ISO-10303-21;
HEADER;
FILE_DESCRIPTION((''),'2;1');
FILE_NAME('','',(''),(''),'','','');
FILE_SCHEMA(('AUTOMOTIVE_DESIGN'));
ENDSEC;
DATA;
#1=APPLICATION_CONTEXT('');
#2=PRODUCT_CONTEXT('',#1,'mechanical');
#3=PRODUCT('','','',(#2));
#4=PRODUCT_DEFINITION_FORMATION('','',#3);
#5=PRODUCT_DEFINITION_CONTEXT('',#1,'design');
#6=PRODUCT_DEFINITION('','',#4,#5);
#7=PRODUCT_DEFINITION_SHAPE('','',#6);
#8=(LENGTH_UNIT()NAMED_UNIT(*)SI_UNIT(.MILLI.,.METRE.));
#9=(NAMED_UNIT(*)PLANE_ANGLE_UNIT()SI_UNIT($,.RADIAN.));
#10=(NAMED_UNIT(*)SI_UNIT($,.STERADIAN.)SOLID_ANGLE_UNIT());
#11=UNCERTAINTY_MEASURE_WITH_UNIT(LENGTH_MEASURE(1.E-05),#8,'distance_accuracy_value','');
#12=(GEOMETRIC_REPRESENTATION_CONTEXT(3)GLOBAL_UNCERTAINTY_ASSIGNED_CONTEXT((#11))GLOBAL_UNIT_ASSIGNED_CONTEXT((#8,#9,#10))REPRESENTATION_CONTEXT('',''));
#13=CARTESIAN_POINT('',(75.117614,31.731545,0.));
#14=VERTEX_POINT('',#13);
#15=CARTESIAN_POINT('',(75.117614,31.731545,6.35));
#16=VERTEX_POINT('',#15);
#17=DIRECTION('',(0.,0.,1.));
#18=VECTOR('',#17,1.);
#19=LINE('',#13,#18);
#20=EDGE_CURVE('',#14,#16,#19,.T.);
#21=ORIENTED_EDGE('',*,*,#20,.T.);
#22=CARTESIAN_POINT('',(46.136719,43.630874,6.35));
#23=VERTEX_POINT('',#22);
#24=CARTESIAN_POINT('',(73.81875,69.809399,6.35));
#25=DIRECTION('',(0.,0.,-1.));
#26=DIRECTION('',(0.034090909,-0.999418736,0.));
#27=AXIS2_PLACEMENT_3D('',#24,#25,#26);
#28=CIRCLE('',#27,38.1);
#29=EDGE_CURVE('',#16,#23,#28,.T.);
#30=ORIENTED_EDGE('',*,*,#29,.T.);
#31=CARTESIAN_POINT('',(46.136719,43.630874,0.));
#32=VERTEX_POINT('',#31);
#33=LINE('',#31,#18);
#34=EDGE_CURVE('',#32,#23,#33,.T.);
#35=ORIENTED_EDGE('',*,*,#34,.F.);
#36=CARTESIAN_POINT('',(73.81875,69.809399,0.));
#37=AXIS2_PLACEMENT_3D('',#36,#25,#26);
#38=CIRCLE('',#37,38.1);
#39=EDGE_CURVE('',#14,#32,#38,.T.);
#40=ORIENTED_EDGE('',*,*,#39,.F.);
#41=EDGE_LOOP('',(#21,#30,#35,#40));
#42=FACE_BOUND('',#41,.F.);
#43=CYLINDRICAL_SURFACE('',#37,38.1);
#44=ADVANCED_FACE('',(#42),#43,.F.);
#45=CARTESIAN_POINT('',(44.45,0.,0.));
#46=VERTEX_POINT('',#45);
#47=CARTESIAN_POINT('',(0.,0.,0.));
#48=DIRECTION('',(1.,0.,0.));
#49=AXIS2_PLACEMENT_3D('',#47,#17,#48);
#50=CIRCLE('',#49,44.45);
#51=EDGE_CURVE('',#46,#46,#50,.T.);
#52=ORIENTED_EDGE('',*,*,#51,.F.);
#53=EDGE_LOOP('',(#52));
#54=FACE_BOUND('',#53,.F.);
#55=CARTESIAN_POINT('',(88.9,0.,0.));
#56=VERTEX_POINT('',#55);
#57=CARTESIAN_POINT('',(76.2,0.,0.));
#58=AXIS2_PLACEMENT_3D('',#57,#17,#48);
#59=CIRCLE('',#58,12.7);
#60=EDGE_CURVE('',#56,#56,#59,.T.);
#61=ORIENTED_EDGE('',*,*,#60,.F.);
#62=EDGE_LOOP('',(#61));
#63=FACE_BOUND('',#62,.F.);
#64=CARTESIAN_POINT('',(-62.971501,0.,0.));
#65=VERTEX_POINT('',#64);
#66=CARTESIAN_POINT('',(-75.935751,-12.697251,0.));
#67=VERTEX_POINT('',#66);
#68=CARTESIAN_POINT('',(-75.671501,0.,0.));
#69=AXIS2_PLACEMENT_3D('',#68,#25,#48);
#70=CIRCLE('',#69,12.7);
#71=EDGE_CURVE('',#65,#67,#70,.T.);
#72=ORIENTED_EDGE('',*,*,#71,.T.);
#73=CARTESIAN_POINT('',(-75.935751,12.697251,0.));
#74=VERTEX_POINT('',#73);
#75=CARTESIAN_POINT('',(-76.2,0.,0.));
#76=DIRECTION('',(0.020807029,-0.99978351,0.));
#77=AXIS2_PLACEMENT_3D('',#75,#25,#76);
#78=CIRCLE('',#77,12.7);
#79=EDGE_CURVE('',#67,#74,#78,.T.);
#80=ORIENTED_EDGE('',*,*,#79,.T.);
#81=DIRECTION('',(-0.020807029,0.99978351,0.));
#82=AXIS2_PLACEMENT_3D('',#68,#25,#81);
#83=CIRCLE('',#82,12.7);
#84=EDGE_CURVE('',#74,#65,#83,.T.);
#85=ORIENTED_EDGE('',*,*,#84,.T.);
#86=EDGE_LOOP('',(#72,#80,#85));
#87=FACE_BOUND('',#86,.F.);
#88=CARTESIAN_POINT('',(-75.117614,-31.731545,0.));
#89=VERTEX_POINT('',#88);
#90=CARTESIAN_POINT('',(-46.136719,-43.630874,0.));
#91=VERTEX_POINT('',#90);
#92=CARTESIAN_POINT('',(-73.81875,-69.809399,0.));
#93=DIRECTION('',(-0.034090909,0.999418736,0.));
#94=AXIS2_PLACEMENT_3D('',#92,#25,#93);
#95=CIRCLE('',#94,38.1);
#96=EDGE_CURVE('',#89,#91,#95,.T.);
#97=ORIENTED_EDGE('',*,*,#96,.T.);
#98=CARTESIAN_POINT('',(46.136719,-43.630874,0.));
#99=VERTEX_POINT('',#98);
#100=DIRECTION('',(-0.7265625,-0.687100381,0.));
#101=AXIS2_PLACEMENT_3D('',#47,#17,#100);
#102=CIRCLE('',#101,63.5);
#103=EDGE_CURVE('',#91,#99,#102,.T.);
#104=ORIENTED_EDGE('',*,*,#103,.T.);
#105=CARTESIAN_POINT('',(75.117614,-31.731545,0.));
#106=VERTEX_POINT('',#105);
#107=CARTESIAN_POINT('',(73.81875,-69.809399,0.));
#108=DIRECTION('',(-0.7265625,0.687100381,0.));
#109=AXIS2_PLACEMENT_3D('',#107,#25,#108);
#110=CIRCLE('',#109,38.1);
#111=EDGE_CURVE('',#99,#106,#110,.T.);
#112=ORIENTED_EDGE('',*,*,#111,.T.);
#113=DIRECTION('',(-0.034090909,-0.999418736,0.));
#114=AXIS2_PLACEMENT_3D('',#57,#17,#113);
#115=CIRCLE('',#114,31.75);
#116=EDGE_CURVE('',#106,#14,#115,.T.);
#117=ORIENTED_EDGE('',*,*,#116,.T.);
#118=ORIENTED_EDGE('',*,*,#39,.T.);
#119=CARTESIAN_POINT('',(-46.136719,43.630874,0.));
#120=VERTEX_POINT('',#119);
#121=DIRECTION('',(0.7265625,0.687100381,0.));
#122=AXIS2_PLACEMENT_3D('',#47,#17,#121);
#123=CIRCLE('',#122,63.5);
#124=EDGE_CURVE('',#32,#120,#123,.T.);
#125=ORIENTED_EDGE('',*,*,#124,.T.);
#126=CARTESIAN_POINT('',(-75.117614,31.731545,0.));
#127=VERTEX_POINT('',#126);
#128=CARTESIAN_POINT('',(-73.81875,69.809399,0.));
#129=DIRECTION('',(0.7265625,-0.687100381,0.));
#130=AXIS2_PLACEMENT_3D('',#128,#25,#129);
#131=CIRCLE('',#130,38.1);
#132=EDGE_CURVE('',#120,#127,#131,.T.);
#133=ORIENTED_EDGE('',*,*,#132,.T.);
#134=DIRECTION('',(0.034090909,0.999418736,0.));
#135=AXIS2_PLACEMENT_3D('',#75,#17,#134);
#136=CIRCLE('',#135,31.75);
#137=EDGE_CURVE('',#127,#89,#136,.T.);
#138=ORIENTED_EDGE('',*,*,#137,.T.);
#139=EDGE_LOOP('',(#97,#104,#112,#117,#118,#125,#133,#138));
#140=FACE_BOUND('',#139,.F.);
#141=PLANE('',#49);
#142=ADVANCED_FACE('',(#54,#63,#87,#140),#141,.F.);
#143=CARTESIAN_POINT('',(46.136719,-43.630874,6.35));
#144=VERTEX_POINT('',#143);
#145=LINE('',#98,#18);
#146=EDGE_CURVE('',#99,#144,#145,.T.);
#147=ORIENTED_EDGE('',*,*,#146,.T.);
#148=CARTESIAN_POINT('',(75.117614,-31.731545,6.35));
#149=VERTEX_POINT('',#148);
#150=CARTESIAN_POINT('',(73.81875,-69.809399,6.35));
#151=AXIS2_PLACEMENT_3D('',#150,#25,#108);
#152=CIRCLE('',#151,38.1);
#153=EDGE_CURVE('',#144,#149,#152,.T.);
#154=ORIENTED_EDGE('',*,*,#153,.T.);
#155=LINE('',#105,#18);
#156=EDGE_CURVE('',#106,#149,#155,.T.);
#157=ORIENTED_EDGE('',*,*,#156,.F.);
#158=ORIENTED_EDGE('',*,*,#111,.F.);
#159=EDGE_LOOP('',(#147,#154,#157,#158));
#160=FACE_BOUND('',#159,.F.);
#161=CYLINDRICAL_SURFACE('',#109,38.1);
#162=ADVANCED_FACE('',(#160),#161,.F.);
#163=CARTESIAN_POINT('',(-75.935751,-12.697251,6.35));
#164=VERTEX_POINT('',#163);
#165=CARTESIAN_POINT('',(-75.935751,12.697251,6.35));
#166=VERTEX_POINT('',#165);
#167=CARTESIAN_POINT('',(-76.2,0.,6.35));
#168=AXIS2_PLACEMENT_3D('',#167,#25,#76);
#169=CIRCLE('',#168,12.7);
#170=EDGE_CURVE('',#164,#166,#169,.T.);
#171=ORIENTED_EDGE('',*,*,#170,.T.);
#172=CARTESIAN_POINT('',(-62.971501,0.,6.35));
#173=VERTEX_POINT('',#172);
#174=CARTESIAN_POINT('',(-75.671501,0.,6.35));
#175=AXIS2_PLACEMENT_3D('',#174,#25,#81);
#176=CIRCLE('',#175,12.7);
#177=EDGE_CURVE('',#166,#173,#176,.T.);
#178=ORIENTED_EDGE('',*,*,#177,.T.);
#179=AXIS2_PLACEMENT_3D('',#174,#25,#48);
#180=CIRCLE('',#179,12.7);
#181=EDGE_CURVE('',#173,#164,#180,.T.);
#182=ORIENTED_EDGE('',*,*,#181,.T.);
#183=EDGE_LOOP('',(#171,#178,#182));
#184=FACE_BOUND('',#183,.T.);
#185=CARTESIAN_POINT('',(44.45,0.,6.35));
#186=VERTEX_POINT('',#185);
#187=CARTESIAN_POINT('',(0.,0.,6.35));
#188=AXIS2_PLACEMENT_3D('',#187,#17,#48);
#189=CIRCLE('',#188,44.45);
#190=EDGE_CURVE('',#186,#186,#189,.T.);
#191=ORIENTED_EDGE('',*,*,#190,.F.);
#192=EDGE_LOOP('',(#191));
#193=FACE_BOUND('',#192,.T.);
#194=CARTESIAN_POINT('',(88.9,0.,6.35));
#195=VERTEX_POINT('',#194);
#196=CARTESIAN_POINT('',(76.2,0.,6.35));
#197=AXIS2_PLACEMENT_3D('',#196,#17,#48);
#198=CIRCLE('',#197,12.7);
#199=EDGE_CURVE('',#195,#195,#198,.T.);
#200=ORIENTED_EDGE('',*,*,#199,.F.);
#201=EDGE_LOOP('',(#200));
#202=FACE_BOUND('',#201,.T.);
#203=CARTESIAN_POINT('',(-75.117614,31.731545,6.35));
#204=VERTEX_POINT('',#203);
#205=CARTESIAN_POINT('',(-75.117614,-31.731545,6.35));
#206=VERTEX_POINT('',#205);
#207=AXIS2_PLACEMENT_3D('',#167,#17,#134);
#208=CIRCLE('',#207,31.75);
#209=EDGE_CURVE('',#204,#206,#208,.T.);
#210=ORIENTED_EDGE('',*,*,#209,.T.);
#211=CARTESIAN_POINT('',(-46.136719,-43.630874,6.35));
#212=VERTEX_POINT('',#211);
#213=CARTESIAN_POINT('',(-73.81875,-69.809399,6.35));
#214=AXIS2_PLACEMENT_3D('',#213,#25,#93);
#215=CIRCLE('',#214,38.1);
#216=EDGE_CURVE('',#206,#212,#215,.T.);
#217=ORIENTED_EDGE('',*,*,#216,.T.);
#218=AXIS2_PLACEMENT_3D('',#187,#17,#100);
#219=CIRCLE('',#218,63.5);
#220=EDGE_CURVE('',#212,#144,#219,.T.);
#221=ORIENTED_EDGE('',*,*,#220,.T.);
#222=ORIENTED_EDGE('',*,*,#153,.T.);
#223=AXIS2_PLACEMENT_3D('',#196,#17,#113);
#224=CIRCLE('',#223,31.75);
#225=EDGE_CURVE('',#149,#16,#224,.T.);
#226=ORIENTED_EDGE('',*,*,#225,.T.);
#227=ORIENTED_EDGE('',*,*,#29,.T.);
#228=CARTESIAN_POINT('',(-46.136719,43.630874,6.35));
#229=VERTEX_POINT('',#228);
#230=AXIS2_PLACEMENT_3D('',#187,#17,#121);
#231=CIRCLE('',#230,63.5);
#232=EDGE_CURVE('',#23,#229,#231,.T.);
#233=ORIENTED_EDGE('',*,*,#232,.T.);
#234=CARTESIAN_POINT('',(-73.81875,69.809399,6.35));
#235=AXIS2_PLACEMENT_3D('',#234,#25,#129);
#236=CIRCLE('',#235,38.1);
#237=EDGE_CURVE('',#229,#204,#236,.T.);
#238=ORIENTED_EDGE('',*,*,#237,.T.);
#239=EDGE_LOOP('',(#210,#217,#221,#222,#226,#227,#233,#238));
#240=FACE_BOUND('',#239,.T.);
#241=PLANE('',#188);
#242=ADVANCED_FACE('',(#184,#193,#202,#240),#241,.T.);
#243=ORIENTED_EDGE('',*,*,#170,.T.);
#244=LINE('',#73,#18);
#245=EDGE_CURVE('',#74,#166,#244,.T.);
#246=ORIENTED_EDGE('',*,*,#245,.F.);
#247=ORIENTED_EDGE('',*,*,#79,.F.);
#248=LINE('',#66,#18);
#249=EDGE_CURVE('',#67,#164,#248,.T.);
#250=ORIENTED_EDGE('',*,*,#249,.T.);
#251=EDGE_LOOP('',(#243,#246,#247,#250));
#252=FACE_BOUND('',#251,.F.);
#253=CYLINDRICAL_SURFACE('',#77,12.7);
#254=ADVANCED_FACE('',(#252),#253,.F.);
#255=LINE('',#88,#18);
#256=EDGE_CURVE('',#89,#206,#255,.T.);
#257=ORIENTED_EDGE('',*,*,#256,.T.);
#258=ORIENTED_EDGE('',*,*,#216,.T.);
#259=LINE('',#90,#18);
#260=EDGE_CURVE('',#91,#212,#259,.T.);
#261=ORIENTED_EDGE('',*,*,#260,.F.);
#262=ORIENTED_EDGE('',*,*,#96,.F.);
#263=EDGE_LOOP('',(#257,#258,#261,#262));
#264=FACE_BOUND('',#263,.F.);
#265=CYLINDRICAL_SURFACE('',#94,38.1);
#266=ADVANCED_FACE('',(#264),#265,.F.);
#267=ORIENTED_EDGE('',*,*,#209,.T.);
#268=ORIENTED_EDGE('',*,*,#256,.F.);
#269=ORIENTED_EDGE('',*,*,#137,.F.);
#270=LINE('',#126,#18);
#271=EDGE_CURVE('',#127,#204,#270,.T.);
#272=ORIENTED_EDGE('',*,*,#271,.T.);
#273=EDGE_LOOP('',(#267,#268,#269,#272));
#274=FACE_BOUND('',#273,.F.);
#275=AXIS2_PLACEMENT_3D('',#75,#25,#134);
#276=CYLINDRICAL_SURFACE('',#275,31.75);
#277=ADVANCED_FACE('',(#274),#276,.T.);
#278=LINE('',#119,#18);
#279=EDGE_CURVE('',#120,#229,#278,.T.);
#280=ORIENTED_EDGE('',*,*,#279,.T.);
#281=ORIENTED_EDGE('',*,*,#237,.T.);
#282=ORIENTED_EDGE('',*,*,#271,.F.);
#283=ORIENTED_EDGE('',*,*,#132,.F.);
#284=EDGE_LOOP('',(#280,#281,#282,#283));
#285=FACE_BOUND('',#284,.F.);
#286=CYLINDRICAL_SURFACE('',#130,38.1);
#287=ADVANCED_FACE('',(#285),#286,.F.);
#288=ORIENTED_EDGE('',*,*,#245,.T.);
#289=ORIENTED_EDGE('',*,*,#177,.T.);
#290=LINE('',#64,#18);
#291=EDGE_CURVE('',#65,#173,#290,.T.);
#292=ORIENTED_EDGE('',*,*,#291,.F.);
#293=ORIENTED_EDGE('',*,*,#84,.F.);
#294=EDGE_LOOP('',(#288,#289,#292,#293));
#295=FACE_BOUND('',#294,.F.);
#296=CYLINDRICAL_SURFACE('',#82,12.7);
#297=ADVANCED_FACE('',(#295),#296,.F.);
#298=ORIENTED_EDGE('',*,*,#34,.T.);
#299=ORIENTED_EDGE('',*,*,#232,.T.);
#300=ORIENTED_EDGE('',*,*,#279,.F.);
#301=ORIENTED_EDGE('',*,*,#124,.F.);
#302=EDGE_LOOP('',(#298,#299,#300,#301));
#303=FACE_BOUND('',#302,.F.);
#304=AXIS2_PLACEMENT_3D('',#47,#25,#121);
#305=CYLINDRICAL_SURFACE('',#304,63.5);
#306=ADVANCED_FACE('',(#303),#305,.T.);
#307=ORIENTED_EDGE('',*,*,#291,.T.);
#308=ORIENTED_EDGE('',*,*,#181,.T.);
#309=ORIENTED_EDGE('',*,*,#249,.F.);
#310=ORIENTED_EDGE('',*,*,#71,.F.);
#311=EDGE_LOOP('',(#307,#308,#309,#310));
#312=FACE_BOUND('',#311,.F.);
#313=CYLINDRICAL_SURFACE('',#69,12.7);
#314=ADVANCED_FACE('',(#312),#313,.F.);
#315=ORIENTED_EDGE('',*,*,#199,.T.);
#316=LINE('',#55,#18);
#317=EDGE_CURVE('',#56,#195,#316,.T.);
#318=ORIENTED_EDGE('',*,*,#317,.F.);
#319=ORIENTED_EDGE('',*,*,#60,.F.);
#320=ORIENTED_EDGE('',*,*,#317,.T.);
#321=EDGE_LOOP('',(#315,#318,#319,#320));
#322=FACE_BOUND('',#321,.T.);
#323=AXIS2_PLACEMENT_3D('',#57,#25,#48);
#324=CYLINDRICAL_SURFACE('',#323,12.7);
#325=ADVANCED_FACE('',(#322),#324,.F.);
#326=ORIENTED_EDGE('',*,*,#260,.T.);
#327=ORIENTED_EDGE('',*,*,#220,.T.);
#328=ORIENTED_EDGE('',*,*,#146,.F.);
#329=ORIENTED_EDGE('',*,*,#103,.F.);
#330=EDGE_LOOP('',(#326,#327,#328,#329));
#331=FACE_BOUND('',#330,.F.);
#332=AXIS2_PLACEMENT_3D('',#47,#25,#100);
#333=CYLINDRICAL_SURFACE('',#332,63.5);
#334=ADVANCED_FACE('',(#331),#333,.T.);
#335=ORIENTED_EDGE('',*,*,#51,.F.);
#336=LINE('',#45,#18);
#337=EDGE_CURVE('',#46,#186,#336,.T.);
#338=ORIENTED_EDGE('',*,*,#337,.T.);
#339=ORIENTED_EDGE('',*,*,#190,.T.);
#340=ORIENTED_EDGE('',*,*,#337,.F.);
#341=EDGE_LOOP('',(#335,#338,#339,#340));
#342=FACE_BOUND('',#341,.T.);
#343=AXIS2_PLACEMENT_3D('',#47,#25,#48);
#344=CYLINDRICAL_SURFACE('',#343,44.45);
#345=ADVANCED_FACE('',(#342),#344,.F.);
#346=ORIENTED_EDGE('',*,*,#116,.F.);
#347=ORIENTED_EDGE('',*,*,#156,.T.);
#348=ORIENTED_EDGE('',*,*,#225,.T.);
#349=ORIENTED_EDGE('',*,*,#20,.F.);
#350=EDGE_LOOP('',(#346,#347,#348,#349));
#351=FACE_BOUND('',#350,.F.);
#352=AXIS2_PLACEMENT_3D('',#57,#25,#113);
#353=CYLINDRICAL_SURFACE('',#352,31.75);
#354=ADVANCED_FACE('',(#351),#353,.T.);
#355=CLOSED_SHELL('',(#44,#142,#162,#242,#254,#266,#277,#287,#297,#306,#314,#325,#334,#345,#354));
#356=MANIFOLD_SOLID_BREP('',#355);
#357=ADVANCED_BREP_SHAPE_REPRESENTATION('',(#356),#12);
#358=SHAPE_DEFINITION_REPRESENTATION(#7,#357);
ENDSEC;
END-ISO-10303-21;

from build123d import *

# Parameters (mm, degrees)
F0_R     = 44.45
F0_R_2   = 12.7
F2_DEPTH = 6.35


# Not quite as in the source:
# - a feature of the source that left no trace in its solid (it failed there, or was rolled back) is left out


with BuildPart() as f2:
    # F0 (on Top) → F2 (new body)
    with BuildSketch(Plane.XY):
        with BuildLine():
            ThreePointArc((46.13671875, -43.6308741946), (59.3475236203, -34.5646316236), (75.1176136364, -31.7315448688))
            ThreePointArc((75.1176136364, -31.7315448688), (107.95, 0), (75.1176136364, 31.7315448688))
            ThreePointArc((75.1176136364, 31.7315448688), (59.3475236203, 34.5646316236), (46.13671875, 43.6308741946))
            ThreePointArc((46.13671875, 43.6308741946), (0, 63.5), (-46.13671875, 43.6308741946))
            ThreePointArc((-46.13671875, 43.6308741946), (-59.3475236203, 34.5646316236), (-75.1176136364, 31.7315448688))
            ThreePointArc((-75.1176136364, 31.7315448688), (-107.95, 0), (-75.1176136364, -31.7315448688))
            ThreePointArc((-75.1176136364, -31.7315448688), (-59.3475236203, -34.5646316236), (-46.13671875, -43.6308741946))
            ThreePointArc((-46.13671875, -43.6308741946), (0, -63.5), (46.13671875, -43.6308741946))
        make_face()
        with BuildLine():
            ThreePointArc((-75.9357507288, 12.6972505812), (-66.7851626656, 9.0732013574), (-62.9715014577, 0))
            ThreePointArc((-62.9715014577, 0), (-66.7851626656, -9.0732013574), (-75.9357507288, -12.6972505812))
            ThreePointArc((-75.9357507288, -12.6972505812), (-88.9, 0), (-75.9357507288, 12.6972505812))
        make_face(mode=Mode.SUBTRACT)
        Circle(F0_R, mode=Mode.SUBTRACT)
        with Locations((76.2, 0)):
            Circle(F0_R_2, mode=Mode.SUBTRACT)
    extrude(amount=F2_DEPTH)


solid = f2.part
